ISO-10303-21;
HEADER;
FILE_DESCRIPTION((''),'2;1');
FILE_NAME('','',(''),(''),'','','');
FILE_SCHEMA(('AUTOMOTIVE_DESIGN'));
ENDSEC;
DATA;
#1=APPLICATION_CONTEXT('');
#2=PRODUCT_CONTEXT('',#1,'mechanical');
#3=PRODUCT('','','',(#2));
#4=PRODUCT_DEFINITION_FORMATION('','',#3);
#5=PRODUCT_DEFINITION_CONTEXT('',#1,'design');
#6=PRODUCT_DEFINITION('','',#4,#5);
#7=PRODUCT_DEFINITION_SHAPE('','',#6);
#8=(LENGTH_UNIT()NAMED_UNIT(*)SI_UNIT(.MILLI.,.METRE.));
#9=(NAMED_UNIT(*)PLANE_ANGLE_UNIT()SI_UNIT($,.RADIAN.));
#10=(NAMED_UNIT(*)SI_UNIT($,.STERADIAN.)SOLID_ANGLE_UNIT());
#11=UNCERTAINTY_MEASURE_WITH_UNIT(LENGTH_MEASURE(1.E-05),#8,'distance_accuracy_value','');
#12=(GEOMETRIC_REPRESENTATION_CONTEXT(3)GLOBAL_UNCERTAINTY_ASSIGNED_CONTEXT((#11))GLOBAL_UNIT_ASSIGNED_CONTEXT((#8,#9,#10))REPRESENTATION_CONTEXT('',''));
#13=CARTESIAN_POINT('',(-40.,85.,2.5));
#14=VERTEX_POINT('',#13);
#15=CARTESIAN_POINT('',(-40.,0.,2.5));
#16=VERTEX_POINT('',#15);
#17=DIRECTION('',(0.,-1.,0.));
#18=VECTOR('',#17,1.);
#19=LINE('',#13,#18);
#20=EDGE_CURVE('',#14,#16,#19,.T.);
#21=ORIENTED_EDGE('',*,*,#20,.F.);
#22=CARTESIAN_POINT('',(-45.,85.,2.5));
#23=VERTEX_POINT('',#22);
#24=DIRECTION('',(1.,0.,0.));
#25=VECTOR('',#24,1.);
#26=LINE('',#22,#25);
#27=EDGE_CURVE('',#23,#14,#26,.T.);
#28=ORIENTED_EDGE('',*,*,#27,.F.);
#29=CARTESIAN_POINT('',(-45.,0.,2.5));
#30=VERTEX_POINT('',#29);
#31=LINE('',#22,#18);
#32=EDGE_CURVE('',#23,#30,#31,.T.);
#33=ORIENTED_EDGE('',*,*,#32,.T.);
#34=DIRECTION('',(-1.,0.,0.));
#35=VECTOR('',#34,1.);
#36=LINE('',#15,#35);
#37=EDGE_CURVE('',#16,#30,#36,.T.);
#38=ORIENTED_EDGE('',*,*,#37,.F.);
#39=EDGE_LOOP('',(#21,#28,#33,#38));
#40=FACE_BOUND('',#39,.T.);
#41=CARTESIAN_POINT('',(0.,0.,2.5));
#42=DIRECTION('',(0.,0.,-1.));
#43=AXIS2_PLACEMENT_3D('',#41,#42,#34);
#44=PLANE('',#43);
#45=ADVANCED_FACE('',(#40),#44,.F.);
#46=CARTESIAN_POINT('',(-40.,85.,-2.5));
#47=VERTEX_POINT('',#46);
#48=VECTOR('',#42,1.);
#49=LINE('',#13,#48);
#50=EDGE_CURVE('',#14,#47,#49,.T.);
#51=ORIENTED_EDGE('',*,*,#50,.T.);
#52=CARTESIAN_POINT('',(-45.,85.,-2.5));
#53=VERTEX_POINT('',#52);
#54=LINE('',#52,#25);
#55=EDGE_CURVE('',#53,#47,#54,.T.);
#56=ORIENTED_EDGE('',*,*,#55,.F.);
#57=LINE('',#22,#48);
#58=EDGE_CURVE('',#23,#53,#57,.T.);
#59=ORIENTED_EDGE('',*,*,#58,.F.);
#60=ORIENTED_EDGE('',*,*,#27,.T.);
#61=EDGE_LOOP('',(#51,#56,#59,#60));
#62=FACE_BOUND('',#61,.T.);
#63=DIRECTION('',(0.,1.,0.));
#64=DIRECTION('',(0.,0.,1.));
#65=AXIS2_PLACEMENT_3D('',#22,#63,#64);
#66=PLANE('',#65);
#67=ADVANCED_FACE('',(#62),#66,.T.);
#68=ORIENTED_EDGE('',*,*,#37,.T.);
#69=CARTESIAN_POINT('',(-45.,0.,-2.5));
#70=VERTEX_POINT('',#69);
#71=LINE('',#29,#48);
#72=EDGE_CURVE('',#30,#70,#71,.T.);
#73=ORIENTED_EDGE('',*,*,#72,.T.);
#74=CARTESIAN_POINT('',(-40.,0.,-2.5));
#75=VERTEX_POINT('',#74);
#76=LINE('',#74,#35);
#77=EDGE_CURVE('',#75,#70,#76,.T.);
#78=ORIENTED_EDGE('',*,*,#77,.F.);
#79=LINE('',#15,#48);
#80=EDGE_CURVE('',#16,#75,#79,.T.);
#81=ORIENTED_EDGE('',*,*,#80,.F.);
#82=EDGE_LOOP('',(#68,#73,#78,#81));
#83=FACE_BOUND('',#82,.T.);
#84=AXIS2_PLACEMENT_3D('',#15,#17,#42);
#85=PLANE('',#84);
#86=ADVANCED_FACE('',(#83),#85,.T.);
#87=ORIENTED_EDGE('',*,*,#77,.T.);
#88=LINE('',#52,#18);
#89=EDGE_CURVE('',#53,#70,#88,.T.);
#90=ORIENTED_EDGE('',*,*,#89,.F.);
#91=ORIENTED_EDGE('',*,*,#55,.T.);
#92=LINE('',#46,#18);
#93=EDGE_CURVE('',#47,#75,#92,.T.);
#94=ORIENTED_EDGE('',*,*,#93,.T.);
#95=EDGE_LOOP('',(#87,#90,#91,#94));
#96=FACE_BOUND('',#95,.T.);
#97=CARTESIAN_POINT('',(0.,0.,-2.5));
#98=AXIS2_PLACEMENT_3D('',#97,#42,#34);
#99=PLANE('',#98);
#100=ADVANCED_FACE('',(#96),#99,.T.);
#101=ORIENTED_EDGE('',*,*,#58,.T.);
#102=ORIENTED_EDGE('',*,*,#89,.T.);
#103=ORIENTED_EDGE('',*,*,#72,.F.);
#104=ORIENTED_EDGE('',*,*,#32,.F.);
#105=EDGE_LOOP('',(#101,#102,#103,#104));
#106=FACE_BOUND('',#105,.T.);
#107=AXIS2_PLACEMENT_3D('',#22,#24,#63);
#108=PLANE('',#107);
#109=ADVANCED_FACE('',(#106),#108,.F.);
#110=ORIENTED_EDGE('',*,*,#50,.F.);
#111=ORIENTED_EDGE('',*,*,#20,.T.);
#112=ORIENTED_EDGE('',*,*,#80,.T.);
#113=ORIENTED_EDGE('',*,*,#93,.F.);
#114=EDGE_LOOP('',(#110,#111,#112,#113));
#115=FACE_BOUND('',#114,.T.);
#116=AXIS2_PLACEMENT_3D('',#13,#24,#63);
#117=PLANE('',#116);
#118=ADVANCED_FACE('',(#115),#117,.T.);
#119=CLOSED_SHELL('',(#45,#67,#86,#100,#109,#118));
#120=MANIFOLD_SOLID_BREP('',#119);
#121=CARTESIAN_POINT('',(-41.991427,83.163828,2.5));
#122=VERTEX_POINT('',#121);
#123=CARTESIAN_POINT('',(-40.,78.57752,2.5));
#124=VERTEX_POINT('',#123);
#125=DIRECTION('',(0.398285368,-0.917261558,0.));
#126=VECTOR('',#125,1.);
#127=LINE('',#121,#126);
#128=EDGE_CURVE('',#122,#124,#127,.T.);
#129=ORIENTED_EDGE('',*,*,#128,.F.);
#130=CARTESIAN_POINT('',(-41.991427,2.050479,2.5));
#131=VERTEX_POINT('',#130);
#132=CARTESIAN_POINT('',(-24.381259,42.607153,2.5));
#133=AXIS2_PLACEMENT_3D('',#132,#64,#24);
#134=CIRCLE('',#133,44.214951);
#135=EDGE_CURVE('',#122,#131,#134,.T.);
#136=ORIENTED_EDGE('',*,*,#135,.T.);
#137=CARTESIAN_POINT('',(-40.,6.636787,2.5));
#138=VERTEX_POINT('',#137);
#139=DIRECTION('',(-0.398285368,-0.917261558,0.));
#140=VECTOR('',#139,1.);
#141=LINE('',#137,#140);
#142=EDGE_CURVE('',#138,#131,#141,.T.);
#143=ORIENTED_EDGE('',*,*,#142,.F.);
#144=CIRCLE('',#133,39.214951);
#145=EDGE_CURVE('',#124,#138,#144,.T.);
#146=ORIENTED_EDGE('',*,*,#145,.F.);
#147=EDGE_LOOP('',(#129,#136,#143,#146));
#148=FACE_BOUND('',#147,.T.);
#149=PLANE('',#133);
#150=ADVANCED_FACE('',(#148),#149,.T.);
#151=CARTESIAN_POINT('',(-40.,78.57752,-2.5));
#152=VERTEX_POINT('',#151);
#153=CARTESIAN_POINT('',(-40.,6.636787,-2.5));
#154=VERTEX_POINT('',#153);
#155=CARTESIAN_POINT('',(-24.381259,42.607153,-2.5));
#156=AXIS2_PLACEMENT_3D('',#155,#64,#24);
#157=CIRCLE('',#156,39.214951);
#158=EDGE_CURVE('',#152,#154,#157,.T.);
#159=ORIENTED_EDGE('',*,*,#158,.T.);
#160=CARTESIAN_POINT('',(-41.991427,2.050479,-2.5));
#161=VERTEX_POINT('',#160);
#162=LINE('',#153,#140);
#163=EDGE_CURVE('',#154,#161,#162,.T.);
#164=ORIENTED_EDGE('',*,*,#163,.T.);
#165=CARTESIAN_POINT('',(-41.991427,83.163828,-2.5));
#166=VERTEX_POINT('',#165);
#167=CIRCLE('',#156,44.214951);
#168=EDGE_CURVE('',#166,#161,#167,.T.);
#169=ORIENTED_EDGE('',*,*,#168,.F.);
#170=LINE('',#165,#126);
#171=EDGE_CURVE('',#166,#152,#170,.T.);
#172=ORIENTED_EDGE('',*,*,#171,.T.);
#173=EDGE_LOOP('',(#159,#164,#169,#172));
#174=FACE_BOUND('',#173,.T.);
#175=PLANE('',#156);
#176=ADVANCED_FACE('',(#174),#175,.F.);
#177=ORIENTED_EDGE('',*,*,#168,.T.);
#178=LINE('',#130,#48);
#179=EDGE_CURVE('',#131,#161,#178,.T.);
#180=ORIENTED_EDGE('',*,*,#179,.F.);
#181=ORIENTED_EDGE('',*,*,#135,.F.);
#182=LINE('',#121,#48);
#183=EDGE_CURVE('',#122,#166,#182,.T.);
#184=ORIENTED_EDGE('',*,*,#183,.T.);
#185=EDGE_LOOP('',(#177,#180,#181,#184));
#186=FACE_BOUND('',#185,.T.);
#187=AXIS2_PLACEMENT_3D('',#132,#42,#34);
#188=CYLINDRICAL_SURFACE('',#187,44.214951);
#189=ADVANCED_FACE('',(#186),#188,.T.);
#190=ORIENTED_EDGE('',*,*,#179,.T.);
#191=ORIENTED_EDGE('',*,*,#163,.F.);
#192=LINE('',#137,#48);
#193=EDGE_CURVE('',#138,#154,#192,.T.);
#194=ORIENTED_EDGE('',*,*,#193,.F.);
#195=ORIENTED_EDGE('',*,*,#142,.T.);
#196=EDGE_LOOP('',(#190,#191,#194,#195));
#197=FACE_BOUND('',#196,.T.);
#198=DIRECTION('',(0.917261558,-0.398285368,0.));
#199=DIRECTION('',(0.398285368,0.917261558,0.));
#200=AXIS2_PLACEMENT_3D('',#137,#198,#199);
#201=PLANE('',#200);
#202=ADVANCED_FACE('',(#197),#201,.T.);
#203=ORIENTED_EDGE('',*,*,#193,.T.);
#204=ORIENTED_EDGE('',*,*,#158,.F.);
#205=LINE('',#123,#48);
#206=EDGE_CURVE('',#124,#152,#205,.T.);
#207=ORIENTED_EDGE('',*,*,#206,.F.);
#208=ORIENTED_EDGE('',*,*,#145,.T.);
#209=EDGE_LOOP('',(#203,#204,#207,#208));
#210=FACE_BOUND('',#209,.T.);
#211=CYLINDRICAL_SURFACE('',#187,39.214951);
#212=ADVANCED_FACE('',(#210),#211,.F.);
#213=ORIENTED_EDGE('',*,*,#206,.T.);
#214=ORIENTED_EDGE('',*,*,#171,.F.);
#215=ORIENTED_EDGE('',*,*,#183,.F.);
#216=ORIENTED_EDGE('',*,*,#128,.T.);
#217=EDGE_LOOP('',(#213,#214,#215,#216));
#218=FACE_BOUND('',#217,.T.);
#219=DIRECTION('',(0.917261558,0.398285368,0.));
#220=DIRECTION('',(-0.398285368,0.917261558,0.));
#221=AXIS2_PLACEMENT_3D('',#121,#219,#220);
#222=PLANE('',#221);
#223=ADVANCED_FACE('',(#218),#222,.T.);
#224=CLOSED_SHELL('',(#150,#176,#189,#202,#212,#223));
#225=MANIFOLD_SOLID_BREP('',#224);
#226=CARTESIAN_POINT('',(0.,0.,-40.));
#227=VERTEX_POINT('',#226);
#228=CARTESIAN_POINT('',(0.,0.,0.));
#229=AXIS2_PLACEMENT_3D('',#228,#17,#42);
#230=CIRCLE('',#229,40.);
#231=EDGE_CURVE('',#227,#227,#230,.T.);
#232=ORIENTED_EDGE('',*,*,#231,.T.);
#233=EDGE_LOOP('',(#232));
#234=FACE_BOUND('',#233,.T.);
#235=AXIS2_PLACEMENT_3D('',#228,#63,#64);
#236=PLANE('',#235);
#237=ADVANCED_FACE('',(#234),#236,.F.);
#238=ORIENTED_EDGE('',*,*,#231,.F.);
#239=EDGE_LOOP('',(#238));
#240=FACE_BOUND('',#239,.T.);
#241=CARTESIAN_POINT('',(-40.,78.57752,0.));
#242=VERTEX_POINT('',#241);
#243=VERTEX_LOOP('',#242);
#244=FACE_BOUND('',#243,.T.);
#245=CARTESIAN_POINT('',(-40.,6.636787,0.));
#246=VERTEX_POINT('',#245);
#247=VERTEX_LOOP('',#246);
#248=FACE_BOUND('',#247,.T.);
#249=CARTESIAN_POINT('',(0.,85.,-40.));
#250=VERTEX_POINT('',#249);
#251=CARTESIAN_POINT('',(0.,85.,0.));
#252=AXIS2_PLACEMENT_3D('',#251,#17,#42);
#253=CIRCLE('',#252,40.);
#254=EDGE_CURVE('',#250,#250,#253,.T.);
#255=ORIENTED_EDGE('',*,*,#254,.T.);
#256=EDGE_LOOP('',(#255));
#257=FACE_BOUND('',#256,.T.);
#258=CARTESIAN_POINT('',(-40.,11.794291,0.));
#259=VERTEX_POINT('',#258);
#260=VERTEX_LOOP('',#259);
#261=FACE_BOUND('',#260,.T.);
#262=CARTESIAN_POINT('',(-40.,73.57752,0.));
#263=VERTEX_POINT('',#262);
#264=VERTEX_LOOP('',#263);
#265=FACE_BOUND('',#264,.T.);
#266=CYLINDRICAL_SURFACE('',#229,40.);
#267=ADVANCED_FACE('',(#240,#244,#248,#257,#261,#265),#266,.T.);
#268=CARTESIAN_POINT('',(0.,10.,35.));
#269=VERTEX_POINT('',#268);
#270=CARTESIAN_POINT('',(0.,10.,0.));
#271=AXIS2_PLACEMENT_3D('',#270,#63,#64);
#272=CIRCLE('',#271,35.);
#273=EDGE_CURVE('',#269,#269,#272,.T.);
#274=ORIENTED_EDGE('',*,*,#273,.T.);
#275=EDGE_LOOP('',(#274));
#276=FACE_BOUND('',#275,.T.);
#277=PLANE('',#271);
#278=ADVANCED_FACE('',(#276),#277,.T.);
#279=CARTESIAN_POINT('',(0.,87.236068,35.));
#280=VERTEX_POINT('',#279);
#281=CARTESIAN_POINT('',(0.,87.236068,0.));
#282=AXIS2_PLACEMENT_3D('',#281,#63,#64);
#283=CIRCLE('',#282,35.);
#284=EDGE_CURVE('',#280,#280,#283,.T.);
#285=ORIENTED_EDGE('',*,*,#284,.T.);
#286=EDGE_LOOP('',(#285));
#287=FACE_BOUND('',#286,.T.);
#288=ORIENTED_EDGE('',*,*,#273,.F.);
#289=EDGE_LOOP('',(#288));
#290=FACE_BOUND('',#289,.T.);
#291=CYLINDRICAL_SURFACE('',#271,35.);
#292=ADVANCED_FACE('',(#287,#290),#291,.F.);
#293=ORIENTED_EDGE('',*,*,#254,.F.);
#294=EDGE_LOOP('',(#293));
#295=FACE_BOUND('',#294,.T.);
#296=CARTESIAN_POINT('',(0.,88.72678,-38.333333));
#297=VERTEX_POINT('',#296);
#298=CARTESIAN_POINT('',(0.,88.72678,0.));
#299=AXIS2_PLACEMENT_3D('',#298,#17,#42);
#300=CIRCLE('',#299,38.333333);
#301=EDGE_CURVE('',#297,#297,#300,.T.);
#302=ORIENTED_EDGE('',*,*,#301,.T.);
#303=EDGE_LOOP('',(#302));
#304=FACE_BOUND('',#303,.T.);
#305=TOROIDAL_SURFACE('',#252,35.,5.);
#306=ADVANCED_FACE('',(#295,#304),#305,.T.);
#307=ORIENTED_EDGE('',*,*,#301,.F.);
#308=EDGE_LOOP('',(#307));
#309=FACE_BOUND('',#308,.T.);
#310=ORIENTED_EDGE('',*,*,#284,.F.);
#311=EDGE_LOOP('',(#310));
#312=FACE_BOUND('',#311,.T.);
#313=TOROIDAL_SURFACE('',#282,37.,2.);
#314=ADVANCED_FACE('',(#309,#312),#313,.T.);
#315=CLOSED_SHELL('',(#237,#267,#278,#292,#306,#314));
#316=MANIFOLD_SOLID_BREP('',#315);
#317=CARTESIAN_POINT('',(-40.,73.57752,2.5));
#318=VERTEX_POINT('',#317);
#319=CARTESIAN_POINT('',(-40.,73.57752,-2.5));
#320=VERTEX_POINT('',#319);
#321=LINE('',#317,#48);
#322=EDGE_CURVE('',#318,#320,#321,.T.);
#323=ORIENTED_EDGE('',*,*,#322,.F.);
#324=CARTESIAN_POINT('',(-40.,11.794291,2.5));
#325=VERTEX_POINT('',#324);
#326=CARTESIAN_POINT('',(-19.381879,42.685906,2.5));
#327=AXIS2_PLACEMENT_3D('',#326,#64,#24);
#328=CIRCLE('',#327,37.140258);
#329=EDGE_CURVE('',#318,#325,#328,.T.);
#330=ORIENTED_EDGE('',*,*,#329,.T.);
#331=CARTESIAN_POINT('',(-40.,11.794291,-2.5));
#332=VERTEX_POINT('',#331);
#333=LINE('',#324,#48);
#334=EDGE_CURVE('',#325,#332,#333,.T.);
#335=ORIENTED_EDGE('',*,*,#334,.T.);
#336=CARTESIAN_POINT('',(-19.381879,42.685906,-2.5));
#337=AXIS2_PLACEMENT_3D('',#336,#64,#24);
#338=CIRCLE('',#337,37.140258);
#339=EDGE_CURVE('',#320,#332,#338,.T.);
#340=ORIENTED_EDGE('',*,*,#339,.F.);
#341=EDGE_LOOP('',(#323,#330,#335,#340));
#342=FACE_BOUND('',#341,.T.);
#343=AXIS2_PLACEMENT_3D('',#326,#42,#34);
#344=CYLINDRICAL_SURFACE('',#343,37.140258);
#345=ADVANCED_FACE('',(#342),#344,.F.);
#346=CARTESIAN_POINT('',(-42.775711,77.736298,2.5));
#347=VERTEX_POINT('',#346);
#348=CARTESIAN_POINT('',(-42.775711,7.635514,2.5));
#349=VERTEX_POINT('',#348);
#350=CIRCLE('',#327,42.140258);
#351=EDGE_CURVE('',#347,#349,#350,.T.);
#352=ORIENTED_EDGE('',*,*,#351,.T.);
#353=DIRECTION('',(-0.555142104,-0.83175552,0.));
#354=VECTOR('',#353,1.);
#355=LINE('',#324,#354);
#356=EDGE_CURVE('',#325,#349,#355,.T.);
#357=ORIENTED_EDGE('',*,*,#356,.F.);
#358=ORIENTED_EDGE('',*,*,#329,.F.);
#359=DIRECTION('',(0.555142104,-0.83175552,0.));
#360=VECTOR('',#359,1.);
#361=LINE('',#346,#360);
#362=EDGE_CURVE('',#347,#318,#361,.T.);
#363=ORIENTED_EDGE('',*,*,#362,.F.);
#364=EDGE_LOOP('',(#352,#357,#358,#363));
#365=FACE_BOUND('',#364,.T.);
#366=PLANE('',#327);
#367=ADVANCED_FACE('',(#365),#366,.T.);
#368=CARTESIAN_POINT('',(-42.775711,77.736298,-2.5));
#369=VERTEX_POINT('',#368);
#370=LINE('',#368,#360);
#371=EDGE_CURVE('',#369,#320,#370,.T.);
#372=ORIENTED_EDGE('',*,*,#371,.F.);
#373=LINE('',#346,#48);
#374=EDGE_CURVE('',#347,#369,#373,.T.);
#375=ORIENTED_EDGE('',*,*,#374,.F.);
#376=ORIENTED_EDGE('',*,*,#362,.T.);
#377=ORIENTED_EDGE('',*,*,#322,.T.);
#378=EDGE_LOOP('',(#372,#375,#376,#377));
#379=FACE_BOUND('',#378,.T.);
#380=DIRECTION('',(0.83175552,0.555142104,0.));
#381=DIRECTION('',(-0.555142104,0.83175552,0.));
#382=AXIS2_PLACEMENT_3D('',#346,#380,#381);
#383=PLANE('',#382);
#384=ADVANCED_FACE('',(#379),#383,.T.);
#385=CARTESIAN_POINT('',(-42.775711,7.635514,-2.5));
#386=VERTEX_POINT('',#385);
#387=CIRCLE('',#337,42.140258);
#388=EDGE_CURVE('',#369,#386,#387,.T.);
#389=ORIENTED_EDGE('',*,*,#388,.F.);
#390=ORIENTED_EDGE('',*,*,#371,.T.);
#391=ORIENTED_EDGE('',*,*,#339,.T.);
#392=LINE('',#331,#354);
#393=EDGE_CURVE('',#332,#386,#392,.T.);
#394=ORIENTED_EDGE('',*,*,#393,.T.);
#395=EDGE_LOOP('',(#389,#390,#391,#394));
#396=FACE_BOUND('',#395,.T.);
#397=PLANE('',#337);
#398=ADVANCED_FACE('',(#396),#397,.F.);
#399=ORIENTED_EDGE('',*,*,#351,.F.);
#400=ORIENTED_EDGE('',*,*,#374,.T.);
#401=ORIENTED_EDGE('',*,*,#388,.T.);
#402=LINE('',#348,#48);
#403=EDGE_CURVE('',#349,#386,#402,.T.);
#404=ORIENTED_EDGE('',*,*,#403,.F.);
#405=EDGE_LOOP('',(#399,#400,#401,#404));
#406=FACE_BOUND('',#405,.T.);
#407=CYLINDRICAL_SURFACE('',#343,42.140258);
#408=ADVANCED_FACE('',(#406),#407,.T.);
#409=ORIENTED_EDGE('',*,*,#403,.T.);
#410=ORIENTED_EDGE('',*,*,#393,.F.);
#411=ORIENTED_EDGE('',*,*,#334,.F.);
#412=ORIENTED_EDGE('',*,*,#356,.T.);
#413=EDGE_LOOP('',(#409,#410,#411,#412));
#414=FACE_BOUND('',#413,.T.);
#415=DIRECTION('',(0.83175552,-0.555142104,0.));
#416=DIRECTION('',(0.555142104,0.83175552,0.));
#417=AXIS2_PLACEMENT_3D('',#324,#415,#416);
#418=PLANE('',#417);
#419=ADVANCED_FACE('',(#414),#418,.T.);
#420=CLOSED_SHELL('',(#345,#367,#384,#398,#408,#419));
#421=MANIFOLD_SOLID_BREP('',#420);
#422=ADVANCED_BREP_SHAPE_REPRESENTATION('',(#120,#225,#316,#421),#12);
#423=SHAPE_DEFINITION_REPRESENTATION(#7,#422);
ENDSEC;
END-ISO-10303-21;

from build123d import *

# Parameters (mm, degrees)
ESBO_O3_W              = 40
ESBO_O3_H              = 90
ESBO_O9_R              = 35
CORTE_EXTRUS_O2_DEPTH  = 80
FILETE5_R              = 5
FILETE7_R              = 2
ESBO_O10_W             = 5
ESBO_O10_H             = 85
EXTRUS_O_FINA2_DEPTH   = 2.5
EXTRUS_O_FINA2_2_DEPTH = 2.5
EXTRUS_O_FINA2_3_DEPTH = 2.5


with BuildPart() as part:
    # Esboço3 → Revolução3 (revolve)
    with BuildSketch(Plane.XY, mode=Mode.PRIVATE) as revolu_o3_sk:
        with Locations((-20, 45)):
            Rectangle(ESBO_O3_W, ESBO_O3_H)
    revolve(revolu_o3_sk.sketch.rotate(Axis((0, 0, 0), (0, 1, 0)), 270), axis=Axis((0, 0, 0), (0, 1, 0)))

    # Esboço9 → Corte-extrusão2 (cut)
    with BuildSketch(Plane(origin=(0, 90, 0), x_dir=(1, 0, 0), z_dir=(0, 1, 0))):
        with Locations(Location((0, 0, 0), (0, 0, 270))):
            Circle(ESBO_O9_R)
    extrude(amount=-CORTE_EXTRUS_O2_DEPTH, mode=Mode.SUBTRACT)

    # Filete5
    filete5_edges = [part.edges().sort_by_distance(p)[0] for p in [
        (0, 90, 40),
    ]]
    fillet(filete5_edges, radius=FILETE5_R - 0.0001)  # a hair under: the kernel refuses the full size

    # Filete7
    filete7_edges = [part.edges().sort_by_distance(p)[0] for p in [
        (0, 90, -35),
    ]]
    fillet(filete7_edges, radius=FILETE7_R)


with BuildPart() as body_2:
    # Esboço10 → Extrusão-Fina2 (new, symmetric)
    with BuildSketch(Plane.XY):
        with Locations((-42.5, 42.5)):
            Rectangle(ESBO_O10_W, ESBO_O10_H)
    extrude(amount=EXTRUS_O_FINA2_DEPTH, both=True)


with BuildPart() as body_3:
    # Esboço10 → Extrus_o-Fina2 2 (new, symmetric)
    with BuildSketch(Plane.XY):
        with BuildLine():
            ThreePointArc((-40, 73.577519956), (-56.522136915, 42.685905601), (-40, 11.794291247))
            Line((-40, 11.794291247), (-42.775710518, 7.635513647))
            ThreePointArc((-42.775710518, 7.635513647), (-61.522136915, 42.685905601), (-42.775710518, 77.736297555))
            Line((-42.775710518, 77.736297555), (-40, 73.577519956))
        make_face()
    extrude(amount=EXTRUS_O_FINA2_2_DEPTH, both=True)


with BuildPart() as body_4:
    # Esboço10 → Extrus_o-Fina2 3 (new, symmetric)
    with BuildSketch(Plane.XY):
        with BuildLine():
            ThreePointArc((-40, 78.577519956), (-63.596209539, 42.607153315), (-40, 6.636786674))
            Line((-40, 6.636786674), (-41.991426841, 2.050478884))
            ThreePointArc((-41.991426841, 2.050478884), (-68.596209539, 42.607153315), (-41.991426841, 83.163827745))
            Line((-41.991426841, 83.163827745), (-40, 78.577519956))
        make_face()
    extrude(amount=EXTRUS_O_FINA2_3_DEPTH, both=True)


solid = Compound([part.part, body_2.part, body_3.part, body_4.part])
